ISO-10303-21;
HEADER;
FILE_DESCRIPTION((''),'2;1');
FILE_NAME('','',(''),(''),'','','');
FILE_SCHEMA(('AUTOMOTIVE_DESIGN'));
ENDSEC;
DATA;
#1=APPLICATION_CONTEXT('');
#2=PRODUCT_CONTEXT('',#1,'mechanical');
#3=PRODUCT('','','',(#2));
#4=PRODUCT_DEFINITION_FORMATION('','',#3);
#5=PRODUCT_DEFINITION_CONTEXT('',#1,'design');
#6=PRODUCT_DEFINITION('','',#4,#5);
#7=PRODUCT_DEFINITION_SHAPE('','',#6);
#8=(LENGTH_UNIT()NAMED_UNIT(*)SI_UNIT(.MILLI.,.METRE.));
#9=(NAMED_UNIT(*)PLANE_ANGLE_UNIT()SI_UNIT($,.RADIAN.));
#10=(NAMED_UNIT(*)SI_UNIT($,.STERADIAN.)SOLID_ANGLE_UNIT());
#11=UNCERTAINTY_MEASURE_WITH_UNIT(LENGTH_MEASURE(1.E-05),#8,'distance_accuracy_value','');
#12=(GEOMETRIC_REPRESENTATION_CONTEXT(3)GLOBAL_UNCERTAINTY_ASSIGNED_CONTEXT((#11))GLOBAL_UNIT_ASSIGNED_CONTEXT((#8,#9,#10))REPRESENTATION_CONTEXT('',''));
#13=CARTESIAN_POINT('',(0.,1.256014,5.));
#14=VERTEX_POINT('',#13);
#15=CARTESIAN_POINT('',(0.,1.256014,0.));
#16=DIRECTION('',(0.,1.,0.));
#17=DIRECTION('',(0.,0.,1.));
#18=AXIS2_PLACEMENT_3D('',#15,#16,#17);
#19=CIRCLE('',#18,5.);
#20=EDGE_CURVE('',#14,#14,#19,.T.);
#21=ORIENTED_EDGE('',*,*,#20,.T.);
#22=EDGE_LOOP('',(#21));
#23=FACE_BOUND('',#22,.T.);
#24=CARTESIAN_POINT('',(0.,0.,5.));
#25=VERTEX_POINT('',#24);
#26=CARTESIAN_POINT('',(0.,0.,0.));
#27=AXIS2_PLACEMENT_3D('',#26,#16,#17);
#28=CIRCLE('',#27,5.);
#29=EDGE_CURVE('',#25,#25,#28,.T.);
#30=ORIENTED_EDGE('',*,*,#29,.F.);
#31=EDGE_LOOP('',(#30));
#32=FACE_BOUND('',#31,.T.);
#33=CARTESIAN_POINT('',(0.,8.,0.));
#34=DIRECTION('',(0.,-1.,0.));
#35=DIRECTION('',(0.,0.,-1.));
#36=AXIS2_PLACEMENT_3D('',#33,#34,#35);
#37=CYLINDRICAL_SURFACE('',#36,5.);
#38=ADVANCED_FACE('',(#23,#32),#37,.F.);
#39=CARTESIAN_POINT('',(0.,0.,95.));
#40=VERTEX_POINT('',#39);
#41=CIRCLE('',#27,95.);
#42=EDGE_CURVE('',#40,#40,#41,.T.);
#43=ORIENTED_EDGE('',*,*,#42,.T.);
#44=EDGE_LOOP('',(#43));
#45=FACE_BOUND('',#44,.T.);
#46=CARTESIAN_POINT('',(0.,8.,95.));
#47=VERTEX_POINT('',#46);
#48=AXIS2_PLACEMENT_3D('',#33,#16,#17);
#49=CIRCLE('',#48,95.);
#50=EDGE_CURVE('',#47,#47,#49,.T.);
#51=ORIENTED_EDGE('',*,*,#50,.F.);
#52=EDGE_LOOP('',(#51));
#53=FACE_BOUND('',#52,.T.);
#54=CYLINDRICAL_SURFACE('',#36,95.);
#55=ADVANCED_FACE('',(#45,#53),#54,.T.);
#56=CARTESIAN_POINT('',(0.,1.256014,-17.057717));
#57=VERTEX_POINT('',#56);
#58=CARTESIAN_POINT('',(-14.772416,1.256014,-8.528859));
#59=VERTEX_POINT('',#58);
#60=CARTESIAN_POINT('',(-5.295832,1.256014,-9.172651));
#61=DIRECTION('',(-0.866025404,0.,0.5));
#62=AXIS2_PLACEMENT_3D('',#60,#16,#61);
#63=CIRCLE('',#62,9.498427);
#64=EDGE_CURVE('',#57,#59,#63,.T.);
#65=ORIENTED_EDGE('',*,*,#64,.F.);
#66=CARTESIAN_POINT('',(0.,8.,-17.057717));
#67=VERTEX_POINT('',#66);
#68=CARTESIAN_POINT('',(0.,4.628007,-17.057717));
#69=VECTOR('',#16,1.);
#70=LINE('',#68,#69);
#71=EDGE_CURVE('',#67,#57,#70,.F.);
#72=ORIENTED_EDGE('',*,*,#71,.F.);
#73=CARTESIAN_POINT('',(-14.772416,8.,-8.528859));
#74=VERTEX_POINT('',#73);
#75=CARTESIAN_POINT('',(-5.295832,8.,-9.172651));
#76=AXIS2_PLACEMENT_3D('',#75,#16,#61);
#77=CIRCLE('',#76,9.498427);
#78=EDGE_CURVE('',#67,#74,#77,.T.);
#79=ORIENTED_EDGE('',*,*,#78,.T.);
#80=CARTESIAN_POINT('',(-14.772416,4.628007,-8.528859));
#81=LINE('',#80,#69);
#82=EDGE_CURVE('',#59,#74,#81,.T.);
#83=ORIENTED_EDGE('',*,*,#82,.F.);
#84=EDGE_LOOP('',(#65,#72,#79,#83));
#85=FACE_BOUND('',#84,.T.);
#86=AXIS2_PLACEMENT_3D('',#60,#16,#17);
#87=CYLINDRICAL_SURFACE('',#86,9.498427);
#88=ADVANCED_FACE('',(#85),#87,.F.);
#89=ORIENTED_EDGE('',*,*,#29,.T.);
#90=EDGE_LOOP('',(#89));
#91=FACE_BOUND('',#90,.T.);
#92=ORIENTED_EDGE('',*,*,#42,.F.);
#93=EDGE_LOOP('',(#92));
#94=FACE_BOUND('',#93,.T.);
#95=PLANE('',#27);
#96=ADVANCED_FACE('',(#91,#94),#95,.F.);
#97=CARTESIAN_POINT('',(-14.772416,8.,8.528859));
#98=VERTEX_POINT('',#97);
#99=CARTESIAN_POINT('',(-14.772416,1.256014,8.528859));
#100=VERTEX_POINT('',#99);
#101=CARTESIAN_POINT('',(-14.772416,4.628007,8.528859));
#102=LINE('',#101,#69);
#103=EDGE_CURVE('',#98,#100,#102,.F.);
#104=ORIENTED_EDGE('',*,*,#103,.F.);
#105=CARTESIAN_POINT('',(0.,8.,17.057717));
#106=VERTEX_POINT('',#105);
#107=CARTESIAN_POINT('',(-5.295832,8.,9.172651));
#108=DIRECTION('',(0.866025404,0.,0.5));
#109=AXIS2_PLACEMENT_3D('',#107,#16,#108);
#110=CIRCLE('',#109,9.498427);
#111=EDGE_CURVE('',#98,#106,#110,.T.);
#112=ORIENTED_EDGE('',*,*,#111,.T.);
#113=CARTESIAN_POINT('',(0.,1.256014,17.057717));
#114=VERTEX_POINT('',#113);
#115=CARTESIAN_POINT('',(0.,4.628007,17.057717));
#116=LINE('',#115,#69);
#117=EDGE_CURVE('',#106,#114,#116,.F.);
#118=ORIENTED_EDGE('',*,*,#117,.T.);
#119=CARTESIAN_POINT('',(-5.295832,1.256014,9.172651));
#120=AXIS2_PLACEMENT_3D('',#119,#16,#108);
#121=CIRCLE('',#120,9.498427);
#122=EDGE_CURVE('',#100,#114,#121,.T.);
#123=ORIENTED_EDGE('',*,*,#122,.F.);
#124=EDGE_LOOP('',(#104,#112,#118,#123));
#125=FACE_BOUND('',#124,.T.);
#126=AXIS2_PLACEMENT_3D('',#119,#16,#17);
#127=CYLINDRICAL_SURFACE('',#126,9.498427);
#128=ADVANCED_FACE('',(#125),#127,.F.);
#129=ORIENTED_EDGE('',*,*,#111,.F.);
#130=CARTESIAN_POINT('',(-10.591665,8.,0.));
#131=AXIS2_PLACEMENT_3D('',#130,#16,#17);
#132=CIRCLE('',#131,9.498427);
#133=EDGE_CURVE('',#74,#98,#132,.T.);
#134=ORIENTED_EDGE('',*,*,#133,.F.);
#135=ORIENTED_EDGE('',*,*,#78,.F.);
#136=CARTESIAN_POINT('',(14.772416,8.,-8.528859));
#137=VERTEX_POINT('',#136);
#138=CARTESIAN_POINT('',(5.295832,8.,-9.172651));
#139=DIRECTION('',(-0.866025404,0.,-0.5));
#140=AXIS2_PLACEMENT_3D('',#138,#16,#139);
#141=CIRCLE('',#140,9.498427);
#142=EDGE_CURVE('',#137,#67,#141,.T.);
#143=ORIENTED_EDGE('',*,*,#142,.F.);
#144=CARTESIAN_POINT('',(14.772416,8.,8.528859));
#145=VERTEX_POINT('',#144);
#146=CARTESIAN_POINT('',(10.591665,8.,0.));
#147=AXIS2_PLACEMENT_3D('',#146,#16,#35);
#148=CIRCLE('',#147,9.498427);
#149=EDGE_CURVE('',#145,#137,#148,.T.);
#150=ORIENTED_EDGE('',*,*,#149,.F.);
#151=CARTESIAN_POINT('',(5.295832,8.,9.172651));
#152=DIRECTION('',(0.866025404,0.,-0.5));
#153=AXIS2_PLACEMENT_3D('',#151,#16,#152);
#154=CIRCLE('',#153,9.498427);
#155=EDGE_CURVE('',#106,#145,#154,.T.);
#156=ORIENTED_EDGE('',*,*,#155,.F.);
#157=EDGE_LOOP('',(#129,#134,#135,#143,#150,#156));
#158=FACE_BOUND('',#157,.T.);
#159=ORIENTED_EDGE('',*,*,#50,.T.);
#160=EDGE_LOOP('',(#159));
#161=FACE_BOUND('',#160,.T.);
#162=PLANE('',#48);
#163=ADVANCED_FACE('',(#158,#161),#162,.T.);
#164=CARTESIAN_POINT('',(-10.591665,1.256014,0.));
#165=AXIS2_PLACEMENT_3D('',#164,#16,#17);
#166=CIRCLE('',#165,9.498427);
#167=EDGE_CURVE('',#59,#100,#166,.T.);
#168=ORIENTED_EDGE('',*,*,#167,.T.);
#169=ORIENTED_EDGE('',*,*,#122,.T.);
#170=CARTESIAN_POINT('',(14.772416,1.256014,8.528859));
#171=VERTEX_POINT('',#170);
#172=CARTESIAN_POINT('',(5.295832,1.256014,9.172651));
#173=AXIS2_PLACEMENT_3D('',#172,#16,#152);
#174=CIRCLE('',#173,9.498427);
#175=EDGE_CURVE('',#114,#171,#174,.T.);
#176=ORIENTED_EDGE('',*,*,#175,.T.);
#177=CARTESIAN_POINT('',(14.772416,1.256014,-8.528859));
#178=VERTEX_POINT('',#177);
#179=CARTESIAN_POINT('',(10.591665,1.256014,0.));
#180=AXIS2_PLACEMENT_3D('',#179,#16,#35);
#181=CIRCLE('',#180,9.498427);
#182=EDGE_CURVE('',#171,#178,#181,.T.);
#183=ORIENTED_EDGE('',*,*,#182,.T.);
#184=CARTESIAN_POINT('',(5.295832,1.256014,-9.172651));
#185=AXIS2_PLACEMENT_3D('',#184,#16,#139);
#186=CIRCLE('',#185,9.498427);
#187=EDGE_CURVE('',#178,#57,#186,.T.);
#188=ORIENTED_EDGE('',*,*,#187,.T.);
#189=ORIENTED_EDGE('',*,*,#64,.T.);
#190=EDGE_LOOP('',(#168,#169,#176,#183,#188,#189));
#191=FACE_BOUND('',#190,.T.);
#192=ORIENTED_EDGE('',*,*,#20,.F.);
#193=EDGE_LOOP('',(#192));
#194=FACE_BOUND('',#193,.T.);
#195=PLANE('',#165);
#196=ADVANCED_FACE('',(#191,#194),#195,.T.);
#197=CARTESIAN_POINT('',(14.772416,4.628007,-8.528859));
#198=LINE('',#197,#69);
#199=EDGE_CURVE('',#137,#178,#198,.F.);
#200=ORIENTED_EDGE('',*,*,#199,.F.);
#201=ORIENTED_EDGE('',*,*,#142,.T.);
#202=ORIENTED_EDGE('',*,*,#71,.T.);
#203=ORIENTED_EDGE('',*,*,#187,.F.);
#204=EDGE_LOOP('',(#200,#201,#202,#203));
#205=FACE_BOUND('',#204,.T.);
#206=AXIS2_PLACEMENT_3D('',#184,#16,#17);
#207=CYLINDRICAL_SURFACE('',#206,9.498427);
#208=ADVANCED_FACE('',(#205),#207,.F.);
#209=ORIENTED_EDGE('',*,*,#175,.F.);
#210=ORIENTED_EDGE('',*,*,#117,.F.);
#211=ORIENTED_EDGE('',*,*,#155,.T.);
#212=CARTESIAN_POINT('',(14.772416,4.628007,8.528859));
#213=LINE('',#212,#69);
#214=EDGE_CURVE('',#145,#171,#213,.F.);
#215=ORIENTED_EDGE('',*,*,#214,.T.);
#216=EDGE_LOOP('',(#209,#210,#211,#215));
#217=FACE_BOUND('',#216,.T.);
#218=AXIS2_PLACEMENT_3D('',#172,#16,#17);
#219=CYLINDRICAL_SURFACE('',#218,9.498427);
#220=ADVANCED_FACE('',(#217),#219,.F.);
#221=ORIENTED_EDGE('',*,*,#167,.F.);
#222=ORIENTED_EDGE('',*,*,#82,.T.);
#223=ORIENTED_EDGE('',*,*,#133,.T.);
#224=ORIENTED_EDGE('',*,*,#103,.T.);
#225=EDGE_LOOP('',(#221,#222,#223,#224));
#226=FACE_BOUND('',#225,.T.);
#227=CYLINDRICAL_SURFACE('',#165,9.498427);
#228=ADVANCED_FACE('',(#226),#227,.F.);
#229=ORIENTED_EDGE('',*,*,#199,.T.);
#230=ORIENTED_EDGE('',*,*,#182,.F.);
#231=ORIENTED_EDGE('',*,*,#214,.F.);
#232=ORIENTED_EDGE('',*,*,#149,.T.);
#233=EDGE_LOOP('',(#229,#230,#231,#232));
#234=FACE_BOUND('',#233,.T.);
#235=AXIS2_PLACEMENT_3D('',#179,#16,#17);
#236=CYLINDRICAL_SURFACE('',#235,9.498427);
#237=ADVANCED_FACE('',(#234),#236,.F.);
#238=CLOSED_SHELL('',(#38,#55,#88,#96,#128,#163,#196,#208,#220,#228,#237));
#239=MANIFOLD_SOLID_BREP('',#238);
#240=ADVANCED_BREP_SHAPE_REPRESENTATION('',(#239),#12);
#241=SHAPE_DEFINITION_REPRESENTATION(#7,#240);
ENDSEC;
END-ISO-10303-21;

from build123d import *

# Parameters (mm, degrees)
SKETCH1_R           = 95
BOSS_EXTRUDE1_DEPTH = 8
SKETCH2_R           = 5
CUT_EXTRUDE1_DEPTH  = 135.588261004
SKETCH3_R           = 9.498426828
CUT_EXTRUDE2_DEPTH  = 6.74398575
CIRPATTERN1_COUNT   = 6


with BuildPart() as part:
    # Sketch1 → Boss-Extrude1 (new body)
    with BuildSketch(Plane(origin=(0, 0, 0), x_dir=(1, 0, 0), z_dir=(0, 1, 0))):
        Circle(SKETCH1_R)
    extrude(amount=BOSS_EXTRUDE1_DEPTH)

    # Sketch2 → Cut-Extrude1 (cut, through all)
    with BuildSketch(Plane(origin=(0, 0, 0), x_dir=(1, 0, 0), z_dir=(0, 1, 0))):
        Circle(SKETCH2_R)
    extrude(amount=CUT_EXTRUDE1_DEPTH, mode=Mode.SUBTRACT)

    # Sketch3 → Cut-Extrude2 (cut)
    with BuildSketch(Plane(origin=(0, 8, 0), x_dir=(1, 0, 0), z_dir=(0, 1, 0))):
        with Locations((-10.59166458, 0)):
            Circle(SKETCH3_R)
    cut_extrude2 = extrude(amount=-CUT_EXTRUDE2_DEPTH, mode=Mode.SUBTRACT)

    # CirPattern1: Cut-Extrude2 ×6 about axis
    cirpattern1_axis = Axis((0, 0, 0), (0, 1, 0))
    for i in range(1, CIRPATTERN1_COUNT):
        add(cut_extrude2.rotate(cirpattern1_axis, i * 360 / CIRPATTERN1_COUNT), mode=Mode.SUBTRACT)


solid = part.part
